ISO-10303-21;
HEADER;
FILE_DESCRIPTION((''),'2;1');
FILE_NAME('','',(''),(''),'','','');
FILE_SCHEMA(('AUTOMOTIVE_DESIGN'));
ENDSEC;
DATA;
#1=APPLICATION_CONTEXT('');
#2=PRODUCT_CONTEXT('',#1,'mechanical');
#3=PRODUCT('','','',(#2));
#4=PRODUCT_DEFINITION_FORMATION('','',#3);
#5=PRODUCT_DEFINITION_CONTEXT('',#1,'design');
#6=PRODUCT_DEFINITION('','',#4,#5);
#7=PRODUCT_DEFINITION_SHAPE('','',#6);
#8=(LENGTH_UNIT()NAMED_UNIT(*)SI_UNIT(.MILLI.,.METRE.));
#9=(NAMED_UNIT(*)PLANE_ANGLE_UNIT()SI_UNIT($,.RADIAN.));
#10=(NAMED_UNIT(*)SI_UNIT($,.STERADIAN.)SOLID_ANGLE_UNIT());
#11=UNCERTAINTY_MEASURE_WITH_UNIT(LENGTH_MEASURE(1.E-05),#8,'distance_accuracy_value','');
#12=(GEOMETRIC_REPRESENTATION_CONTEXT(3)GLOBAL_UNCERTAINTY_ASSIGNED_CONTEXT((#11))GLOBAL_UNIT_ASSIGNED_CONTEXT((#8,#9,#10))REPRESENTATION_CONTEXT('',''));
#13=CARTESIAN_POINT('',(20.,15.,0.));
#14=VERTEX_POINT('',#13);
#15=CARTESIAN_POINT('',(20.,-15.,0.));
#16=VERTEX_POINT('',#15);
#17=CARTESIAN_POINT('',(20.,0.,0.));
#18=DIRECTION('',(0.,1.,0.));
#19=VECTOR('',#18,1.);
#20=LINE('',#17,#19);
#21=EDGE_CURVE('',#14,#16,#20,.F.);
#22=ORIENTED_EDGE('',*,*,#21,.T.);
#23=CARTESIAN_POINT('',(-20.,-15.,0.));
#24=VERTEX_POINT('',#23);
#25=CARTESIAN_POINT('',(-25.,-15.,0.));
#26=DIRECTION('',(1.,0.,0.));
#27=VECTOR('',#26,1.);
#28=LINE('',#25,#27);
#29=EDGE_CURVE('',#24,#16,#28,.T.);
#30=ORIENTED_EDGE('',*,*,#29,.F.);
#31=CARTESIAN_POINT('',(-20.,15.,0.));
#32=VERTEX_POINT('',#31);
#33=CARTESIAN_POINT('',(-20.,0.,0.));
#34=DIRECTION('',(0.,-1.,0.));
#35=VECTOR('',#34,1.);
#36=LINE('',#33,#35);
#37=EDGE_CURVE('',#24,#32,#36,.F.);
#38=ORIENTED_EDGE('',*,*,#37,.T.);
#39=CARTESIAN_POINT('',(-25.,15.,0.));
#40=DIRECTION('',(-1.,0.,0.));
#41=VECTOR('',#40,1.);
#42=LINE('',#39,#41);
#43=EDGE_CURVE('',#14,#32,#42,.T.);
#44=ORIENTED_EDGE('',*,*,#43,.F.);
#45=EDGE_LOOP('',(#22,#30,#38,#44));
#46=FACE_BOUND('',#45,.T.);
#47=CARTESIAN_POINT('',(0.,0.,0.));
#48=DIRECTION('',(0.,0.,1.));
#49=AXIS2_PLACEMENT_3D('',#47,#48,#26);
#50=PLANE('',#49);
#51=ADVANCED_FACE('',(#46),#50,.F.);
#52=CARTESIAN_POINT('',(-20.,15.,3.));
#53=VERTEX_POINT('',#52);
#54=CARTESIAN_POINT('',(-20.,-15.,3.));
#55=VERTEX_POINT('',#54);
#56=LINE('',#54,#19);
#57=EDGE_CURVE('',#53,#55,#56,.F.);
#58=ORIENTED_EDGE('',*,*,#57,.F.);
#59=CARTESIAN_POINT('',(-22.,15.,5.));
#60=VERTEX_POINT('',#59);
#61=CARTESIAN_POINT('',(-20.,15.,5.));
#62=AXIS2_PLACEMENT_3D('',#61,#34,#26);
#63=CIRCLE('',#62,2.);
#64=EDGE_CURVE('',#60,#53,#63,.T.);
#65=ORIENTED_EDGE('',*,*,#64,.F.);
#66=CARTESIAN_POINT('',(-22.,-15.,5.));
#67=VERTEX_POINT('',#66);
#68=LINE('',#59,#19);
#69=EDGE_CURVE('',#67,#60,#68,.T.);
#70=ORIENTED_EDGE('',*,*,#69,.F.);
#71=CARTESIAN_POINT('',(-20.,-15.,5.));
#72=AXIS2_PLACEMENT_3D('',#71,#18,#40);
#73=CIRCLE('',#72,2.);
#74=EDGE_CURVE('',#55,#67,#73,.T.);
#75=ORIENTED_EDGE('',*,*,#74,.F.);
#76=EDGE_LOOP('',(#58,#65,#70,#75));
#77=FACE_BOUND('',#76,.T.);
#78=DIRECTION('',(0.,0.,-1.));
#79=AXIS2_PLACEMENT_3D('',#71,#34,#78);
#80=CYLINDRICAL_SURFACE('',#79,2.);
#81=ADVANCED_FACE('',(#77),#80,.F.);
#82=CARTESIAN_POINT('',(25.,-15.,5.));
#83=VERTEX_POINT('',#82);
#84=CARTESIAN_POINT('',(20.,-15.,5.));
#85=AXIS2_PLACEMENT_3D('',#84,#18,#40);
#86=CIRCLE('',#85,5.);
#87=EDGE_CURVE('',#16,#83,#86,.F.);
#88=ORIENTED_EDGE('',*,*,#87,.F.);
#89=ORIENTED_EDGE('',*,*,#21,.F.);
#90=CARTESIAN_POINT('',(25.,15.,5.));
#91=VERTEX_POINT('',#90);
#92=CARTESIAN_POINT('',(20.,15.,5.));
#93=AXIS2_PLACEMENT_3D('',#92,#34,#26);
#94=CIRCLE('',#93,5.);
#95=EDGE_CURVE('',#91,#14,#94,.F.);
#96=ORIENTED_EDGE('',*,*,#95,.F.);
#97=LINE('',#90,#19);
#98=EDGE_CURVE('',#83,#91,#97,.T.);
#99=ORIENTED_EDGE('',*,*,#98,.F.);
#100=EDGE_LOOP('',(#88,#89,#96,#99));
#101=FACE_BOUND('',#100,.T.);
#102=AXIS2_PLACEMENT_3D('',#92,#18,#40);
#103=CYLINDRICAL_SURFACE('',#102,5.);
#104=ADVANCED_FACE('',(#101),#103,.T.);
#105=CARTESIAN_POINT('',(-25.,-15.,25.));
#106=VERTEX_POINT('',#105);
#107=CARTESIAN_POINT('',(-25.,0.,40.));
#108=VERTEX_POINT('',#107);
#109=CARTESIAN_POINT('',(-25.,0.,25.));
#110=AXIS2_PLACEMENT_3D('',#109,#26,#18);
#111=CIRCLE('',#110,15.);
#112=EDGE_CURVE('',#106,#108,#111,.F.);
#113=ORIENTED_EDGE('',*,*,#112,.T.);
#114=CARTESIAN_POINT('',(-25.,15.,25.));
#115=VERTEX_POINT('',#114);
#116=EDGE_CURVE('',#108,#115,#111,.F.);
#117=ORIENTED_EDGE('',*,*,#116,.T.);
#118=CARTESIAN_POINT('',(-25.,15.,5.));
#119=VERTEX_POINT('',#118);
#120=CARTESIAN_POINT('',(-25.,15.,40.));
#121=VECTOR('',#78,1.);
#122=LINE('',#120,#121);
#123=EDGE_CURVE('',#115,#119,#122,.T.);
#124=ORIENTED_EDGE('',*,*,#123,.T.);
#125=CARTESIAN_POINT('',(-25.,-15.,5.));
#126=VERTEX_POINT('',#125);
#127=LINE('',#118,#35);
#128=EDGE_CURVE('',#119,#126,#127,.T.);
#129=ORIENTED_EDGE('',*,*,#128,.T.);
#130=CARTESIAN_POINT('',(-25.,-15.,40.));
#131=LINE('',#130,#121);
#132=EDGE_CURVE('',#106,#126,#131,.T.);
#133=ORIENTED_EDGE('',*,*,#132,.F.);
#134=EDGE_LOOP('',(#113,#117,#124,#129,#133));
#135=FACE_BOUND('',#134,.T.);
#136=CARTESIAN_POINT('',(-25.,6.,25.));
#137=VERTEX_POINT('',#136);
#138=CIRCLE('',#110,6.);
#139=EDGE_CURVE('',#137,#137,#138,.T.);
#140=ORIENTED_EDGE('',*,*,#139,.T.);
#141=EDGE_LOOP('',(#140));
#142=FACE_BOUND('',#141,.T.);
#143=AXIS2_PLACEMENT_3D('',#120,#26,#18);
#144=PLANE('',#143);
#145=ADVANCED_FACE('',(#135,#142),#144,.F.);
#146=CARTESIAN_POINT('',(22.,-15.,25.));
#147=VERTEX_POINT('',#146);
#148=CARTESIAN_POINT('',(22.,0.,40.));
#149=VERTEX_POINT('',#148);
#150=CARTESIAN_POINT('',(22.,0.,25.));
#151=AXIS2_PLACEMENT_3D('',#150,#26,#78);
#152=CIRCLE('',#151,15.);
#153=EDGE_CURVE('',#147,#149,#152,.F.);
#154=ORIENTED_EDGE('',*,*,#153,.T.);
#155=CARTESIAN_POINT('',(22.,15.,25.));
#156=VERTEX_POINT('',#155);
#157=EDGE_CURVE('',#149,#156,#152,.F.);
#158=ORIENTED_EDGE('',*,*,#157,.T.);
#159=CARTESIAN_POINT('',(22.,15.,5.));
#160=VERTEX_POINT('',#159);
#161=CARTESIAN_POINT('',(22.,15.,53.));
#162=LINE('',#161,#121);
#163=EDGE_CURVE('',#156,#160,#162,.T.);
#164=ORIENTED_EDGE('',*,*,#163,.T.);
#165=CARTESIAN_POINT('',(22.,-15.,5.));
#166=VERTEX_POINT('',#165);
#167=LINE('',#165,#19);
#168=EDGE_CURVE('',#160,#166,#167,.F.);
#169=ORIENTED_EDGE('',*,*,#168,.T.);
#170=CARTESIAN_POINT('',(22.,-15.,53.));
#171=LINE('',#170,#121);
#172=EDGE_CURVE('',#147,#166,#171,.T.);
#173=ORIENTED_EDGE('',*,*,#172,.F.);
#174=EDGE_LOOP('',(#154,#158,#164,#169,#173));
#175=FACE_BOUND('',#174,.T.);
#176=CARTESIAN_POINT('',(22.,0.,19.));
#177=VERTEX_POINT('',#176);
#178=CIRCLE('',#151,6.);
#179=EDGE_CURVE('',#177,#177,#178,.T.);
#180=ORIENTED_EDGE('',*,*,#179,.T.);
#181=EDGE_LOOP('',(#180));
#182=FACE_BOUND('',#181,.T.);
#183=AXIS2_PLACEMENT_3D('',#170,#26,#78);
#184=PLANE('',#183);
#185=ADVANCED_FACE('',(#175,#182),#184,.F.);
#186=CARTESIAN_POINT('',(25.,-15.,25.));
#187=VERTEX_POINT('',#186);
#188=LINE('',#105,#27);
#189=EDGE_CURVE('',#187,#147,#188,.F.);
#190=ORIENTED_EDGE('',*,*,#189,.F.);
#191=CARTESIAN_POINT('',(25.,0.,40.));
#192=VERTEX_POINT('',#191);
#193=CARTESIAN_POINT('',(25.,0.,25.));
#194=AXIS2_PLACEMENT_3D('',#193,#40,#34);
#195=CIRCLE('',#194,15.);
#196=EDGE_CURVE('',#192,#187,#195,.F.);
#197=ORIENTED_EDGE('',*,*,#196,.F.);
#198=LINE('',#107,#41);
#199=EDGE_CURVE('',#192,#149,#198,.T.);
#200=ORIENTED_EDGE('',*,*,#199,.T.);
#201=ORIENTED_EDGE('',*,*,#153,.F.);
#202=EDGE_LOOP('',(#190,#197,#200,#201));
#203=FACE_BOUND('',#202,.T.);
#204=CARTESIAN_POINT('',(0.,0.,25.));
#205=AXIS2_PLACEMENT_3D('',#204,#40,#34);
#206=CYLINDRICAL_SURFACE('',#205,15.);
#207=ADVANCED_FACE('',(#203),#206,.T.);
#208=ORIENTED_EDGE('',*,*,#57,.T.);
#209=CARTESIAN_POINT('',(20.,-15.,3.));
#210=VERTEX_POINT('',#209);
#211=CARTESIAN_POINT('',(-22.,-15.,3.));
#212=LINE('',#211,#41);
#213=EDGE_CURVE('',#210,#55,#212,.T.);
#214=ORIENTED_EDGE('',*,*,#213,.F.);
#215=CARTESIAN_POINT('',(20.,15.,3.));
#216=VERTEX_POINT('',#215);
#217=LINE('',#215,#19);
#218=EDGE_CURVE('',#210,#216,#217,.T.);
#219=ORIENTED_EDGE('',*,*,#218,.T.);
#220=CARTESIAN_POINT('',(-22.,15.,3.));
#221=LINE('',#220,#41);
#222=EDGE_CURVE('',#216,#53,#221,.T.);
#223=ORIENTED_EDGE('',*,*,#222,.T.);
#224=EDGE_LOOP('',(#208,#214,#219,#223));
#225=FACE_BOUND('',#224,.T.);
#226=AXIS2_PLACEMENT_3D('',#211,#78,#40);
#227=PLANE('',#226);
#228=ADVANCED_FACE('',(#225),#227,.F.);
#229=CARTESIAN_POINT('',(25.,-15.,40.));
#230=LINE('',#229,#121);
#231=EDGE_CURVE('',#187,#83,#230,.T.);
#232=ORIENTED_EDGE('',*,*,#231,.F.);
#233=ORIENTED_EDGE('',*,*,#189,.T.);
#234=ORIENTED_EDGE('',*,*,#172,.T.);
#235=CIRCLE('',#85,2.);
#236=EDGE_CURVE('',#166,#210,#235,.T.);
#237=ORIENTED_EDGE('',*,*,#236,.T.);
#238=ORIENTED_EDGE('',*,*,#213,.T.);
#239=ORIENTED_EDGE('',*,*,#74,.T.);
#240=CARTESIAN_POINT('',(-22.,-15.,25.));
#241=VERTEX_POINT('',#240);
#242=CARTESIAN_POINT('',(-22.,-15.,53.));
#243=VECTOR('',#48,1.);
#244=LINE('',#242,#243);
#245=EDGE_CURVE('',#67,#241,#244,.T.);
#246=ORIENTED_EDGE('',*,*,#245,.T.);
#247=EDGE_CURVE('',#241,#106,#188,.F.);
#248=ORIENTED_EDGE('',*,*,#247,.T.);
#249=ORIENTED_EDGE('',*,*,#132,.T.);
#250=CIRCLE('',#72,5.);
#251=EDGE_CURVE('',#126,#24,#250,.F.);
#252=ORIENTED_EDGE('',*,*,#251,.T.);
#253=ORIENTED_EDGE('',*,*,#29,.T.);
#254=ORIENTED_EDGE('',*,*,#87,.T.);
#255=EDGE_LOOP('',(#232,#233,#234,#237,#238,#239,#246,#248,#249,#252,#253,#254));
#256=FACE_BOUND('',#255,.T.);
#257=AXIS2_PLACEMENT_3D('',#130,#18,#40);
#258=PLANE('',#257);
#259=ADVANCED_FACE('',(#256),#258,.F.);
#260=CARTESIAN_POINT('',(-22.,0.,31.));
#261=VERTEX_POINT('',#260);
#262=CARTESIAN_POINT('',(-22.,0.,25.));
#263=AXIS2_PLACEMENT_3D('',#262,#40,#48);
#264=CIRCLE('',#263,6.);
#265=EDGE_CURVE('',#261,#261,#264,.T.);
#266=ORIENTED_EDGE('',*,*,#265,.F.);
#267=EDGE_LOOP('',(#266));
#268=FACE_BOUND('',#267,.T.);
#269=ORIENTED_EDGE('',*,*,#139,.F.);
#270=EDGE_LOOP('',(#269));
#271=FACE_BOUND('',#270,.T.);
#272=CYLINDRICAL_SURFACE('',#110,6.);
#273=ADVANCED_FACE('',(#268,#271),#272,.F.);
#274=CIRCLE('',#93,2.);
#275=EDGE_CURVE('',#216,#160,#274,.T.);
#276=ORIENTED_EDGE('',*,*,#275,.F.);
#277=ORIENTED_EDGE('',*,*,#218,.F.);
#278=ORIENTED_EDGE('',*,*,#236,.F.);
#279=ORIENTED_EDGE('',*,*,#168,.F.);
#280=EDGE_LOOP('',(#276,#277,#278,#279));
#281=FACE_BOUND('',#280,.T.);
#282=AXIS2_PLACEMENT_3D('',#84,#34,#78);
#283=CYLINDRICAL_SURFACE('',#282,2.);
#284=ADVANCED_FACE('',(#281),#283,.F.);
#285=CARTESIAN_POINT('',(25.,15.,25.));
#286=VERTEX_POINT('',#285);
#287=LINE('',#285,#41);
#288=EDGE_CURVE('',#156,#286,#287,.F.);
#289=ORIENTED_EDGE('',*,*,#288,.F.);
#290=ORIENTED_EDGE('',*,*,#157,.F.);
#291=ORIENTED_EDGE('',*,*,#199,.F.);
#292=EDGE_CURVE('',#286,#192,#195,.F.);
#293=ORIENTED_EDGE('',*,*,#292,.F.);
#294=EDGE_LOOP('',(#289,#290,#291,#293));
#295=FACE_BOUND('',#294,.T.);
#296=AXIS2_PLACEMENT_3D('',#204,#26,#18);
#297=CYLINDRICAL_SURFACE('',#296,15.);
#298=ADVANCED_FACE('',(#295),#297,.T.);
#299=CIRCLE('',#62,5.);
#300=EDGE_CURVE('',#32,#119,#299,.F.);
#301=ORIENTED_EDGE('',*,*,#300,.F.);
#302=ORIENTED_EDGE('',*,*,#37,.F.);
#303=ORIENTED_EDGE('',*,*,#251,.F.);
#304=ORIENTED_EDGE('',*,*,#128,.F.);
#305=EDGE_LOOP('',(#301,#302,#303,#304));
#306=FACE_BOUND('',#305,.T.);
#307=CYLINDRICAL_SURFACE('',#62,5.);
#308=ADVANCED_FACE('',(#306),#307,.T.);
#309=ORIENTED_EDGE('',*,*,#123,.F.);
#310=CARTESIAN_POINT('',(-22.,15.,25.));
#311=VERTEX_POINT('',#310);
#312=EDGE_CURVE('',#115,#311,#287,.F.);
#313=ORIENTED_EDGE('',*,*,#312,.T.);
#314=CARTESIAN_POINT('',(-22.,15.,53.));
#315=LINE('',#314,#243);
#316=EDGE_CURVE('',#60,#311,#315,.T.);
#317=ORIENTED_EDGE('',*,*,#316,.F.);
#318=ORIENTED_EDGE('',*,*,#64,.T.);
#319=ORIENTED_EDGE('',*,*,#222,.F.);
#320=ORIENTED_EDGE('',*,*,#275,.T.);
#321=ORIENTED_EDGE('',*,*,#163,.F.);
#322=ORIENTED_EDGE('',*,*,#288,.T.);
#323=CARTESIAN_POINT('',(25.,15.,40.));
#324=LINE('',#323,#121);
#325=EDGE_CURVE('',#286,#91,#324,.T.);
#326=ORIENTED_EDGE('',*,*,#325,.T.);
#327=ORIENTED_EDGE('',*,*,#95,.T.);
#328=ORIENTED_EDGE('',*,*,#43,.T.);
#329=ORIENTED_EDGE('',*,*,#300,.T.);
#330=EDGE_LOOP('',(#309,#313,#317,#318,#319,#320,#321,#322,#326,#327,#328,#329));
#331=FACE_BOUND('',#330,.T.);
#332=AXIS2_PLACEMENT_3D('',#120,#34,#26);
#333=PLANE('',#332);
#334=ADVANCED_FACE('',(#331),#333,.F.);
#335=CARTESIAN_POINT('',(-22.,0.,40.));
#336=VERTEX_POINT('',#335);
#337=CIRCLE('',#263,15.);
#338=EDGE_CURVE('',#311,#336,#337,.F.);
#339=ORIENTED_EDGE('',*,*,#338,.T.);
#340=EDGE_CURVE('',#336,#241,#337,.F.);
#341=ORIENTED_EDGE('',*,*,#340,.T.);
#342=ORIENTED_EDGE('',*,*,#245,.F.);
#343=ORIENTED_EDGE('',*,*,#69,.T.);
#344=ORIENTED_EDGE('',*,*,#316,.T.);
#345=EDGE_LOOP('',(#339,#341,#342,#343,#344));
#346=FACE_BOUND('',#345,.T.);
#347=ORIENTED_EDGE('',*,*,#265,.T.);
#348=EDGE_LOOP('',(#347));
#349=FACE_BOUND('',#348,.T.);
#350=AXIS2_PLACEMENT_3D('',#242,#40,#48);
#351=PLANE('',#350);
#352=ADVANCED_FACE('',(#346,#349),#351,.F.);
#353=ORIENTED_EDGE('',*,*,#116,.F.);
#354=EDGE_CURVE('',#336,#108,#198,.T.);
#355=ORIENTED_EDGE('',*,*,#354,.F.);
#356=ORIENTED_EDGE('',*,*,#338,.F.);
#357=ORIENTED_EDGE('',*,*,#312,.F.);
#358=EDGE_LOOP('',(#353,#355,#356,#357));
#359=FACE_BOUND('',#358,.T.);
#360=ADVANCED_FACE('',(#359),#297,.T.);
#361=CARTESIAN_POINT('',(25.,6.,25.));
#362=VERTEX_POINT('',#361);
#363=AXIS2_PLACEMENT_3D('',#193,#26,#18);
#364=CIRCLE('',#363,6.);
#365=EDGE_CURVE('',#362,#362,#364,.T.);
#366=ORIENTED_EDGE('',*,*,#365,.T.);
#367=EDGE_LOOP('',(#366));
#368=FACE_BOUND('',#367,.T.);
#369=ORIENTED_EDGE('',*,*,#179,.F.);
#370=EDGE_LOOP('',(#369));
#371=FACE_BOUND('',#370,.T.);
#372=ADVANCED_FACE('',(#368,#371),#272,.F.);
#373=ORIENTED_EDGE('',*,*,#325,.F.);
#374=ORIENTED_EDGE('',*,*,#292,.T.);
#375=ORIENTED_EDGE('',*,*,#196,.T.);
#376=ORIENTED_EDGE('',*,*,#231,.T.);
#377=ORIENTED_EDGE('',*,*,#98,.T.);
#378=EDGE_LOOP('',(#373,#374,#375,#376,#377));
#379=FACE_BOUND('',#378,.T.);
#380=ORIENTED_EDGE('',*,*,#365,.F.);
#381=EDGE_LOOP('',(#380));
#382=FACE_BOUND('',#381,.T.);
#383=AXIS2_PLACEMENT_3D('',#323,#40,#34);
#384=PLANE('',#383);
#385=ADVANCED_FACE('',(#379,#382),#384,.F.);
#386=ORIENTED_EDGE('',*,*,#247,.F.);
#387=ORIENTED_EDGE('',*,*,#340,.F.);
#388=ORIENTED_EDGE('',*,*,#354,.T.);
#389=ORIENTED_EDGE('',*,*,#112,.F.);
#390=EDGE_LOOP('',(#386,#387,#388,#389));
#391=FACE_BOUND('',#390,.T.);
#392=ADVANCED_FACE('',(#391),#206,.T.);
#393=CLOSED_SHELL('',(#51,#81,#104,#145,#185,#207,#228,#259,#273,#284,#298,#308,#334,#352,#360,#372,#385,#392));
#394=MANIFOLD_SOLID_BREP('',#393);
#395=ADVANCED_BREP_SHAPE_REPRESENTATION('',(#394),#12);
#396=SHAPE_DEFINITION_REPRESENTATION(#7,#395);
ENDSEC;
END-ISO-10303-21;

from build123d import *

# Parameters (mm, degrees)
SKICA1_W                      = 50
SKICA1_H                      = 30
P_IDAT_VYSUNUT_M1_DEPTH       = 40
ZAOBLIT1_R                    = 15
ODEBRAT_VYSUNUT_M1_DEPTH      = 50.497474683
ODEBRAT_VYSUNUT_M1_DEPTH_BACK = 50.497474683
SKICA2_W                      = 44
SKICA2_H                      = 50
ZAOBLIT2_R                    = 2
ZAOBLIT3_R                    = 5
SKICA3_R                      = 6
ODEBRAT_VYSUNUT_M2_DEPTH      = 66.76473219


with BuildPart() as part:
    # Skica1 → Přidat vysunutím1 (new body)
    with BuildSketch(Plane.XY):
        Rectangle(SKICA1_W, SKICA1_H)
    extrude(amount=P_IDAT_VYSUNUT_M1_DEPTH)

    # Zaoblit1
    zaoblit1_edges = [part.edges().sort_by_distance(p)[0] for p in [
        (0, -15, 40),
        (0, 15, 40),
    ]]
    fillet(zaoblit1_edges, radius=ZAOBLIT1_R - 0.0001)  # a hair under: the kernel refuses the full size

    # Skica2 → Odebrat vysunutím1 (cut, two sides: drawn at the far end of the back side and taken through both)
    with BuildSketch(Plane(origin=(0, 0, 0), x_dir=(1, 0, 0), z_dir=(0, 1, 0)).offset(-ODEBRAT_VYSUNUT_M1_DEPTH_BACK)):
        with Locations((0, -28)):
            Rectangle(SKICA2_W, SKICA2_H)
    extrude(amount=ODEBRAT_VYSUNUT_M1_DEPTH + ODEBRAT_VYSUNUT_M1_DEPTH_BACK, mode=Mode.SUBTRACT)

    # Zaoblit2
    zaoblit2_edges = [part.edges().sort_by_distance(p)[0] for p in [
        (-22, 0, 3),
        (22, 0, 3),
    ]]
    fillet(zaoblit2_edges, radius=ZAOBLIT2_R)

    # Zaoblit3
    zaoblit3_edges = [part.edges().sort_by_distance(p)[0] for p in [
        (25, 0, 0),
        (-25, 0, 0),
    ]]
    fillet(zaoblit3_edges, radius=ZAOBLIT3_R)

    # Skica3 → Odebrat vysunutím2 (cut, through all)
    with BuildSketch(Plane(origin=(25, 0, 0), x_dir=(0, 0, -1), z_dir=(1, 0, 0))):
        with Locations(Location((-25, 0, 0), (0, 0, 90))):
            Circle(SKICA3_R)
    extrude(amount=-ODEBRAT_VYSUNUT_M2_DEPTH, mode=Mode.SUBTRACT)


solid = part.part
